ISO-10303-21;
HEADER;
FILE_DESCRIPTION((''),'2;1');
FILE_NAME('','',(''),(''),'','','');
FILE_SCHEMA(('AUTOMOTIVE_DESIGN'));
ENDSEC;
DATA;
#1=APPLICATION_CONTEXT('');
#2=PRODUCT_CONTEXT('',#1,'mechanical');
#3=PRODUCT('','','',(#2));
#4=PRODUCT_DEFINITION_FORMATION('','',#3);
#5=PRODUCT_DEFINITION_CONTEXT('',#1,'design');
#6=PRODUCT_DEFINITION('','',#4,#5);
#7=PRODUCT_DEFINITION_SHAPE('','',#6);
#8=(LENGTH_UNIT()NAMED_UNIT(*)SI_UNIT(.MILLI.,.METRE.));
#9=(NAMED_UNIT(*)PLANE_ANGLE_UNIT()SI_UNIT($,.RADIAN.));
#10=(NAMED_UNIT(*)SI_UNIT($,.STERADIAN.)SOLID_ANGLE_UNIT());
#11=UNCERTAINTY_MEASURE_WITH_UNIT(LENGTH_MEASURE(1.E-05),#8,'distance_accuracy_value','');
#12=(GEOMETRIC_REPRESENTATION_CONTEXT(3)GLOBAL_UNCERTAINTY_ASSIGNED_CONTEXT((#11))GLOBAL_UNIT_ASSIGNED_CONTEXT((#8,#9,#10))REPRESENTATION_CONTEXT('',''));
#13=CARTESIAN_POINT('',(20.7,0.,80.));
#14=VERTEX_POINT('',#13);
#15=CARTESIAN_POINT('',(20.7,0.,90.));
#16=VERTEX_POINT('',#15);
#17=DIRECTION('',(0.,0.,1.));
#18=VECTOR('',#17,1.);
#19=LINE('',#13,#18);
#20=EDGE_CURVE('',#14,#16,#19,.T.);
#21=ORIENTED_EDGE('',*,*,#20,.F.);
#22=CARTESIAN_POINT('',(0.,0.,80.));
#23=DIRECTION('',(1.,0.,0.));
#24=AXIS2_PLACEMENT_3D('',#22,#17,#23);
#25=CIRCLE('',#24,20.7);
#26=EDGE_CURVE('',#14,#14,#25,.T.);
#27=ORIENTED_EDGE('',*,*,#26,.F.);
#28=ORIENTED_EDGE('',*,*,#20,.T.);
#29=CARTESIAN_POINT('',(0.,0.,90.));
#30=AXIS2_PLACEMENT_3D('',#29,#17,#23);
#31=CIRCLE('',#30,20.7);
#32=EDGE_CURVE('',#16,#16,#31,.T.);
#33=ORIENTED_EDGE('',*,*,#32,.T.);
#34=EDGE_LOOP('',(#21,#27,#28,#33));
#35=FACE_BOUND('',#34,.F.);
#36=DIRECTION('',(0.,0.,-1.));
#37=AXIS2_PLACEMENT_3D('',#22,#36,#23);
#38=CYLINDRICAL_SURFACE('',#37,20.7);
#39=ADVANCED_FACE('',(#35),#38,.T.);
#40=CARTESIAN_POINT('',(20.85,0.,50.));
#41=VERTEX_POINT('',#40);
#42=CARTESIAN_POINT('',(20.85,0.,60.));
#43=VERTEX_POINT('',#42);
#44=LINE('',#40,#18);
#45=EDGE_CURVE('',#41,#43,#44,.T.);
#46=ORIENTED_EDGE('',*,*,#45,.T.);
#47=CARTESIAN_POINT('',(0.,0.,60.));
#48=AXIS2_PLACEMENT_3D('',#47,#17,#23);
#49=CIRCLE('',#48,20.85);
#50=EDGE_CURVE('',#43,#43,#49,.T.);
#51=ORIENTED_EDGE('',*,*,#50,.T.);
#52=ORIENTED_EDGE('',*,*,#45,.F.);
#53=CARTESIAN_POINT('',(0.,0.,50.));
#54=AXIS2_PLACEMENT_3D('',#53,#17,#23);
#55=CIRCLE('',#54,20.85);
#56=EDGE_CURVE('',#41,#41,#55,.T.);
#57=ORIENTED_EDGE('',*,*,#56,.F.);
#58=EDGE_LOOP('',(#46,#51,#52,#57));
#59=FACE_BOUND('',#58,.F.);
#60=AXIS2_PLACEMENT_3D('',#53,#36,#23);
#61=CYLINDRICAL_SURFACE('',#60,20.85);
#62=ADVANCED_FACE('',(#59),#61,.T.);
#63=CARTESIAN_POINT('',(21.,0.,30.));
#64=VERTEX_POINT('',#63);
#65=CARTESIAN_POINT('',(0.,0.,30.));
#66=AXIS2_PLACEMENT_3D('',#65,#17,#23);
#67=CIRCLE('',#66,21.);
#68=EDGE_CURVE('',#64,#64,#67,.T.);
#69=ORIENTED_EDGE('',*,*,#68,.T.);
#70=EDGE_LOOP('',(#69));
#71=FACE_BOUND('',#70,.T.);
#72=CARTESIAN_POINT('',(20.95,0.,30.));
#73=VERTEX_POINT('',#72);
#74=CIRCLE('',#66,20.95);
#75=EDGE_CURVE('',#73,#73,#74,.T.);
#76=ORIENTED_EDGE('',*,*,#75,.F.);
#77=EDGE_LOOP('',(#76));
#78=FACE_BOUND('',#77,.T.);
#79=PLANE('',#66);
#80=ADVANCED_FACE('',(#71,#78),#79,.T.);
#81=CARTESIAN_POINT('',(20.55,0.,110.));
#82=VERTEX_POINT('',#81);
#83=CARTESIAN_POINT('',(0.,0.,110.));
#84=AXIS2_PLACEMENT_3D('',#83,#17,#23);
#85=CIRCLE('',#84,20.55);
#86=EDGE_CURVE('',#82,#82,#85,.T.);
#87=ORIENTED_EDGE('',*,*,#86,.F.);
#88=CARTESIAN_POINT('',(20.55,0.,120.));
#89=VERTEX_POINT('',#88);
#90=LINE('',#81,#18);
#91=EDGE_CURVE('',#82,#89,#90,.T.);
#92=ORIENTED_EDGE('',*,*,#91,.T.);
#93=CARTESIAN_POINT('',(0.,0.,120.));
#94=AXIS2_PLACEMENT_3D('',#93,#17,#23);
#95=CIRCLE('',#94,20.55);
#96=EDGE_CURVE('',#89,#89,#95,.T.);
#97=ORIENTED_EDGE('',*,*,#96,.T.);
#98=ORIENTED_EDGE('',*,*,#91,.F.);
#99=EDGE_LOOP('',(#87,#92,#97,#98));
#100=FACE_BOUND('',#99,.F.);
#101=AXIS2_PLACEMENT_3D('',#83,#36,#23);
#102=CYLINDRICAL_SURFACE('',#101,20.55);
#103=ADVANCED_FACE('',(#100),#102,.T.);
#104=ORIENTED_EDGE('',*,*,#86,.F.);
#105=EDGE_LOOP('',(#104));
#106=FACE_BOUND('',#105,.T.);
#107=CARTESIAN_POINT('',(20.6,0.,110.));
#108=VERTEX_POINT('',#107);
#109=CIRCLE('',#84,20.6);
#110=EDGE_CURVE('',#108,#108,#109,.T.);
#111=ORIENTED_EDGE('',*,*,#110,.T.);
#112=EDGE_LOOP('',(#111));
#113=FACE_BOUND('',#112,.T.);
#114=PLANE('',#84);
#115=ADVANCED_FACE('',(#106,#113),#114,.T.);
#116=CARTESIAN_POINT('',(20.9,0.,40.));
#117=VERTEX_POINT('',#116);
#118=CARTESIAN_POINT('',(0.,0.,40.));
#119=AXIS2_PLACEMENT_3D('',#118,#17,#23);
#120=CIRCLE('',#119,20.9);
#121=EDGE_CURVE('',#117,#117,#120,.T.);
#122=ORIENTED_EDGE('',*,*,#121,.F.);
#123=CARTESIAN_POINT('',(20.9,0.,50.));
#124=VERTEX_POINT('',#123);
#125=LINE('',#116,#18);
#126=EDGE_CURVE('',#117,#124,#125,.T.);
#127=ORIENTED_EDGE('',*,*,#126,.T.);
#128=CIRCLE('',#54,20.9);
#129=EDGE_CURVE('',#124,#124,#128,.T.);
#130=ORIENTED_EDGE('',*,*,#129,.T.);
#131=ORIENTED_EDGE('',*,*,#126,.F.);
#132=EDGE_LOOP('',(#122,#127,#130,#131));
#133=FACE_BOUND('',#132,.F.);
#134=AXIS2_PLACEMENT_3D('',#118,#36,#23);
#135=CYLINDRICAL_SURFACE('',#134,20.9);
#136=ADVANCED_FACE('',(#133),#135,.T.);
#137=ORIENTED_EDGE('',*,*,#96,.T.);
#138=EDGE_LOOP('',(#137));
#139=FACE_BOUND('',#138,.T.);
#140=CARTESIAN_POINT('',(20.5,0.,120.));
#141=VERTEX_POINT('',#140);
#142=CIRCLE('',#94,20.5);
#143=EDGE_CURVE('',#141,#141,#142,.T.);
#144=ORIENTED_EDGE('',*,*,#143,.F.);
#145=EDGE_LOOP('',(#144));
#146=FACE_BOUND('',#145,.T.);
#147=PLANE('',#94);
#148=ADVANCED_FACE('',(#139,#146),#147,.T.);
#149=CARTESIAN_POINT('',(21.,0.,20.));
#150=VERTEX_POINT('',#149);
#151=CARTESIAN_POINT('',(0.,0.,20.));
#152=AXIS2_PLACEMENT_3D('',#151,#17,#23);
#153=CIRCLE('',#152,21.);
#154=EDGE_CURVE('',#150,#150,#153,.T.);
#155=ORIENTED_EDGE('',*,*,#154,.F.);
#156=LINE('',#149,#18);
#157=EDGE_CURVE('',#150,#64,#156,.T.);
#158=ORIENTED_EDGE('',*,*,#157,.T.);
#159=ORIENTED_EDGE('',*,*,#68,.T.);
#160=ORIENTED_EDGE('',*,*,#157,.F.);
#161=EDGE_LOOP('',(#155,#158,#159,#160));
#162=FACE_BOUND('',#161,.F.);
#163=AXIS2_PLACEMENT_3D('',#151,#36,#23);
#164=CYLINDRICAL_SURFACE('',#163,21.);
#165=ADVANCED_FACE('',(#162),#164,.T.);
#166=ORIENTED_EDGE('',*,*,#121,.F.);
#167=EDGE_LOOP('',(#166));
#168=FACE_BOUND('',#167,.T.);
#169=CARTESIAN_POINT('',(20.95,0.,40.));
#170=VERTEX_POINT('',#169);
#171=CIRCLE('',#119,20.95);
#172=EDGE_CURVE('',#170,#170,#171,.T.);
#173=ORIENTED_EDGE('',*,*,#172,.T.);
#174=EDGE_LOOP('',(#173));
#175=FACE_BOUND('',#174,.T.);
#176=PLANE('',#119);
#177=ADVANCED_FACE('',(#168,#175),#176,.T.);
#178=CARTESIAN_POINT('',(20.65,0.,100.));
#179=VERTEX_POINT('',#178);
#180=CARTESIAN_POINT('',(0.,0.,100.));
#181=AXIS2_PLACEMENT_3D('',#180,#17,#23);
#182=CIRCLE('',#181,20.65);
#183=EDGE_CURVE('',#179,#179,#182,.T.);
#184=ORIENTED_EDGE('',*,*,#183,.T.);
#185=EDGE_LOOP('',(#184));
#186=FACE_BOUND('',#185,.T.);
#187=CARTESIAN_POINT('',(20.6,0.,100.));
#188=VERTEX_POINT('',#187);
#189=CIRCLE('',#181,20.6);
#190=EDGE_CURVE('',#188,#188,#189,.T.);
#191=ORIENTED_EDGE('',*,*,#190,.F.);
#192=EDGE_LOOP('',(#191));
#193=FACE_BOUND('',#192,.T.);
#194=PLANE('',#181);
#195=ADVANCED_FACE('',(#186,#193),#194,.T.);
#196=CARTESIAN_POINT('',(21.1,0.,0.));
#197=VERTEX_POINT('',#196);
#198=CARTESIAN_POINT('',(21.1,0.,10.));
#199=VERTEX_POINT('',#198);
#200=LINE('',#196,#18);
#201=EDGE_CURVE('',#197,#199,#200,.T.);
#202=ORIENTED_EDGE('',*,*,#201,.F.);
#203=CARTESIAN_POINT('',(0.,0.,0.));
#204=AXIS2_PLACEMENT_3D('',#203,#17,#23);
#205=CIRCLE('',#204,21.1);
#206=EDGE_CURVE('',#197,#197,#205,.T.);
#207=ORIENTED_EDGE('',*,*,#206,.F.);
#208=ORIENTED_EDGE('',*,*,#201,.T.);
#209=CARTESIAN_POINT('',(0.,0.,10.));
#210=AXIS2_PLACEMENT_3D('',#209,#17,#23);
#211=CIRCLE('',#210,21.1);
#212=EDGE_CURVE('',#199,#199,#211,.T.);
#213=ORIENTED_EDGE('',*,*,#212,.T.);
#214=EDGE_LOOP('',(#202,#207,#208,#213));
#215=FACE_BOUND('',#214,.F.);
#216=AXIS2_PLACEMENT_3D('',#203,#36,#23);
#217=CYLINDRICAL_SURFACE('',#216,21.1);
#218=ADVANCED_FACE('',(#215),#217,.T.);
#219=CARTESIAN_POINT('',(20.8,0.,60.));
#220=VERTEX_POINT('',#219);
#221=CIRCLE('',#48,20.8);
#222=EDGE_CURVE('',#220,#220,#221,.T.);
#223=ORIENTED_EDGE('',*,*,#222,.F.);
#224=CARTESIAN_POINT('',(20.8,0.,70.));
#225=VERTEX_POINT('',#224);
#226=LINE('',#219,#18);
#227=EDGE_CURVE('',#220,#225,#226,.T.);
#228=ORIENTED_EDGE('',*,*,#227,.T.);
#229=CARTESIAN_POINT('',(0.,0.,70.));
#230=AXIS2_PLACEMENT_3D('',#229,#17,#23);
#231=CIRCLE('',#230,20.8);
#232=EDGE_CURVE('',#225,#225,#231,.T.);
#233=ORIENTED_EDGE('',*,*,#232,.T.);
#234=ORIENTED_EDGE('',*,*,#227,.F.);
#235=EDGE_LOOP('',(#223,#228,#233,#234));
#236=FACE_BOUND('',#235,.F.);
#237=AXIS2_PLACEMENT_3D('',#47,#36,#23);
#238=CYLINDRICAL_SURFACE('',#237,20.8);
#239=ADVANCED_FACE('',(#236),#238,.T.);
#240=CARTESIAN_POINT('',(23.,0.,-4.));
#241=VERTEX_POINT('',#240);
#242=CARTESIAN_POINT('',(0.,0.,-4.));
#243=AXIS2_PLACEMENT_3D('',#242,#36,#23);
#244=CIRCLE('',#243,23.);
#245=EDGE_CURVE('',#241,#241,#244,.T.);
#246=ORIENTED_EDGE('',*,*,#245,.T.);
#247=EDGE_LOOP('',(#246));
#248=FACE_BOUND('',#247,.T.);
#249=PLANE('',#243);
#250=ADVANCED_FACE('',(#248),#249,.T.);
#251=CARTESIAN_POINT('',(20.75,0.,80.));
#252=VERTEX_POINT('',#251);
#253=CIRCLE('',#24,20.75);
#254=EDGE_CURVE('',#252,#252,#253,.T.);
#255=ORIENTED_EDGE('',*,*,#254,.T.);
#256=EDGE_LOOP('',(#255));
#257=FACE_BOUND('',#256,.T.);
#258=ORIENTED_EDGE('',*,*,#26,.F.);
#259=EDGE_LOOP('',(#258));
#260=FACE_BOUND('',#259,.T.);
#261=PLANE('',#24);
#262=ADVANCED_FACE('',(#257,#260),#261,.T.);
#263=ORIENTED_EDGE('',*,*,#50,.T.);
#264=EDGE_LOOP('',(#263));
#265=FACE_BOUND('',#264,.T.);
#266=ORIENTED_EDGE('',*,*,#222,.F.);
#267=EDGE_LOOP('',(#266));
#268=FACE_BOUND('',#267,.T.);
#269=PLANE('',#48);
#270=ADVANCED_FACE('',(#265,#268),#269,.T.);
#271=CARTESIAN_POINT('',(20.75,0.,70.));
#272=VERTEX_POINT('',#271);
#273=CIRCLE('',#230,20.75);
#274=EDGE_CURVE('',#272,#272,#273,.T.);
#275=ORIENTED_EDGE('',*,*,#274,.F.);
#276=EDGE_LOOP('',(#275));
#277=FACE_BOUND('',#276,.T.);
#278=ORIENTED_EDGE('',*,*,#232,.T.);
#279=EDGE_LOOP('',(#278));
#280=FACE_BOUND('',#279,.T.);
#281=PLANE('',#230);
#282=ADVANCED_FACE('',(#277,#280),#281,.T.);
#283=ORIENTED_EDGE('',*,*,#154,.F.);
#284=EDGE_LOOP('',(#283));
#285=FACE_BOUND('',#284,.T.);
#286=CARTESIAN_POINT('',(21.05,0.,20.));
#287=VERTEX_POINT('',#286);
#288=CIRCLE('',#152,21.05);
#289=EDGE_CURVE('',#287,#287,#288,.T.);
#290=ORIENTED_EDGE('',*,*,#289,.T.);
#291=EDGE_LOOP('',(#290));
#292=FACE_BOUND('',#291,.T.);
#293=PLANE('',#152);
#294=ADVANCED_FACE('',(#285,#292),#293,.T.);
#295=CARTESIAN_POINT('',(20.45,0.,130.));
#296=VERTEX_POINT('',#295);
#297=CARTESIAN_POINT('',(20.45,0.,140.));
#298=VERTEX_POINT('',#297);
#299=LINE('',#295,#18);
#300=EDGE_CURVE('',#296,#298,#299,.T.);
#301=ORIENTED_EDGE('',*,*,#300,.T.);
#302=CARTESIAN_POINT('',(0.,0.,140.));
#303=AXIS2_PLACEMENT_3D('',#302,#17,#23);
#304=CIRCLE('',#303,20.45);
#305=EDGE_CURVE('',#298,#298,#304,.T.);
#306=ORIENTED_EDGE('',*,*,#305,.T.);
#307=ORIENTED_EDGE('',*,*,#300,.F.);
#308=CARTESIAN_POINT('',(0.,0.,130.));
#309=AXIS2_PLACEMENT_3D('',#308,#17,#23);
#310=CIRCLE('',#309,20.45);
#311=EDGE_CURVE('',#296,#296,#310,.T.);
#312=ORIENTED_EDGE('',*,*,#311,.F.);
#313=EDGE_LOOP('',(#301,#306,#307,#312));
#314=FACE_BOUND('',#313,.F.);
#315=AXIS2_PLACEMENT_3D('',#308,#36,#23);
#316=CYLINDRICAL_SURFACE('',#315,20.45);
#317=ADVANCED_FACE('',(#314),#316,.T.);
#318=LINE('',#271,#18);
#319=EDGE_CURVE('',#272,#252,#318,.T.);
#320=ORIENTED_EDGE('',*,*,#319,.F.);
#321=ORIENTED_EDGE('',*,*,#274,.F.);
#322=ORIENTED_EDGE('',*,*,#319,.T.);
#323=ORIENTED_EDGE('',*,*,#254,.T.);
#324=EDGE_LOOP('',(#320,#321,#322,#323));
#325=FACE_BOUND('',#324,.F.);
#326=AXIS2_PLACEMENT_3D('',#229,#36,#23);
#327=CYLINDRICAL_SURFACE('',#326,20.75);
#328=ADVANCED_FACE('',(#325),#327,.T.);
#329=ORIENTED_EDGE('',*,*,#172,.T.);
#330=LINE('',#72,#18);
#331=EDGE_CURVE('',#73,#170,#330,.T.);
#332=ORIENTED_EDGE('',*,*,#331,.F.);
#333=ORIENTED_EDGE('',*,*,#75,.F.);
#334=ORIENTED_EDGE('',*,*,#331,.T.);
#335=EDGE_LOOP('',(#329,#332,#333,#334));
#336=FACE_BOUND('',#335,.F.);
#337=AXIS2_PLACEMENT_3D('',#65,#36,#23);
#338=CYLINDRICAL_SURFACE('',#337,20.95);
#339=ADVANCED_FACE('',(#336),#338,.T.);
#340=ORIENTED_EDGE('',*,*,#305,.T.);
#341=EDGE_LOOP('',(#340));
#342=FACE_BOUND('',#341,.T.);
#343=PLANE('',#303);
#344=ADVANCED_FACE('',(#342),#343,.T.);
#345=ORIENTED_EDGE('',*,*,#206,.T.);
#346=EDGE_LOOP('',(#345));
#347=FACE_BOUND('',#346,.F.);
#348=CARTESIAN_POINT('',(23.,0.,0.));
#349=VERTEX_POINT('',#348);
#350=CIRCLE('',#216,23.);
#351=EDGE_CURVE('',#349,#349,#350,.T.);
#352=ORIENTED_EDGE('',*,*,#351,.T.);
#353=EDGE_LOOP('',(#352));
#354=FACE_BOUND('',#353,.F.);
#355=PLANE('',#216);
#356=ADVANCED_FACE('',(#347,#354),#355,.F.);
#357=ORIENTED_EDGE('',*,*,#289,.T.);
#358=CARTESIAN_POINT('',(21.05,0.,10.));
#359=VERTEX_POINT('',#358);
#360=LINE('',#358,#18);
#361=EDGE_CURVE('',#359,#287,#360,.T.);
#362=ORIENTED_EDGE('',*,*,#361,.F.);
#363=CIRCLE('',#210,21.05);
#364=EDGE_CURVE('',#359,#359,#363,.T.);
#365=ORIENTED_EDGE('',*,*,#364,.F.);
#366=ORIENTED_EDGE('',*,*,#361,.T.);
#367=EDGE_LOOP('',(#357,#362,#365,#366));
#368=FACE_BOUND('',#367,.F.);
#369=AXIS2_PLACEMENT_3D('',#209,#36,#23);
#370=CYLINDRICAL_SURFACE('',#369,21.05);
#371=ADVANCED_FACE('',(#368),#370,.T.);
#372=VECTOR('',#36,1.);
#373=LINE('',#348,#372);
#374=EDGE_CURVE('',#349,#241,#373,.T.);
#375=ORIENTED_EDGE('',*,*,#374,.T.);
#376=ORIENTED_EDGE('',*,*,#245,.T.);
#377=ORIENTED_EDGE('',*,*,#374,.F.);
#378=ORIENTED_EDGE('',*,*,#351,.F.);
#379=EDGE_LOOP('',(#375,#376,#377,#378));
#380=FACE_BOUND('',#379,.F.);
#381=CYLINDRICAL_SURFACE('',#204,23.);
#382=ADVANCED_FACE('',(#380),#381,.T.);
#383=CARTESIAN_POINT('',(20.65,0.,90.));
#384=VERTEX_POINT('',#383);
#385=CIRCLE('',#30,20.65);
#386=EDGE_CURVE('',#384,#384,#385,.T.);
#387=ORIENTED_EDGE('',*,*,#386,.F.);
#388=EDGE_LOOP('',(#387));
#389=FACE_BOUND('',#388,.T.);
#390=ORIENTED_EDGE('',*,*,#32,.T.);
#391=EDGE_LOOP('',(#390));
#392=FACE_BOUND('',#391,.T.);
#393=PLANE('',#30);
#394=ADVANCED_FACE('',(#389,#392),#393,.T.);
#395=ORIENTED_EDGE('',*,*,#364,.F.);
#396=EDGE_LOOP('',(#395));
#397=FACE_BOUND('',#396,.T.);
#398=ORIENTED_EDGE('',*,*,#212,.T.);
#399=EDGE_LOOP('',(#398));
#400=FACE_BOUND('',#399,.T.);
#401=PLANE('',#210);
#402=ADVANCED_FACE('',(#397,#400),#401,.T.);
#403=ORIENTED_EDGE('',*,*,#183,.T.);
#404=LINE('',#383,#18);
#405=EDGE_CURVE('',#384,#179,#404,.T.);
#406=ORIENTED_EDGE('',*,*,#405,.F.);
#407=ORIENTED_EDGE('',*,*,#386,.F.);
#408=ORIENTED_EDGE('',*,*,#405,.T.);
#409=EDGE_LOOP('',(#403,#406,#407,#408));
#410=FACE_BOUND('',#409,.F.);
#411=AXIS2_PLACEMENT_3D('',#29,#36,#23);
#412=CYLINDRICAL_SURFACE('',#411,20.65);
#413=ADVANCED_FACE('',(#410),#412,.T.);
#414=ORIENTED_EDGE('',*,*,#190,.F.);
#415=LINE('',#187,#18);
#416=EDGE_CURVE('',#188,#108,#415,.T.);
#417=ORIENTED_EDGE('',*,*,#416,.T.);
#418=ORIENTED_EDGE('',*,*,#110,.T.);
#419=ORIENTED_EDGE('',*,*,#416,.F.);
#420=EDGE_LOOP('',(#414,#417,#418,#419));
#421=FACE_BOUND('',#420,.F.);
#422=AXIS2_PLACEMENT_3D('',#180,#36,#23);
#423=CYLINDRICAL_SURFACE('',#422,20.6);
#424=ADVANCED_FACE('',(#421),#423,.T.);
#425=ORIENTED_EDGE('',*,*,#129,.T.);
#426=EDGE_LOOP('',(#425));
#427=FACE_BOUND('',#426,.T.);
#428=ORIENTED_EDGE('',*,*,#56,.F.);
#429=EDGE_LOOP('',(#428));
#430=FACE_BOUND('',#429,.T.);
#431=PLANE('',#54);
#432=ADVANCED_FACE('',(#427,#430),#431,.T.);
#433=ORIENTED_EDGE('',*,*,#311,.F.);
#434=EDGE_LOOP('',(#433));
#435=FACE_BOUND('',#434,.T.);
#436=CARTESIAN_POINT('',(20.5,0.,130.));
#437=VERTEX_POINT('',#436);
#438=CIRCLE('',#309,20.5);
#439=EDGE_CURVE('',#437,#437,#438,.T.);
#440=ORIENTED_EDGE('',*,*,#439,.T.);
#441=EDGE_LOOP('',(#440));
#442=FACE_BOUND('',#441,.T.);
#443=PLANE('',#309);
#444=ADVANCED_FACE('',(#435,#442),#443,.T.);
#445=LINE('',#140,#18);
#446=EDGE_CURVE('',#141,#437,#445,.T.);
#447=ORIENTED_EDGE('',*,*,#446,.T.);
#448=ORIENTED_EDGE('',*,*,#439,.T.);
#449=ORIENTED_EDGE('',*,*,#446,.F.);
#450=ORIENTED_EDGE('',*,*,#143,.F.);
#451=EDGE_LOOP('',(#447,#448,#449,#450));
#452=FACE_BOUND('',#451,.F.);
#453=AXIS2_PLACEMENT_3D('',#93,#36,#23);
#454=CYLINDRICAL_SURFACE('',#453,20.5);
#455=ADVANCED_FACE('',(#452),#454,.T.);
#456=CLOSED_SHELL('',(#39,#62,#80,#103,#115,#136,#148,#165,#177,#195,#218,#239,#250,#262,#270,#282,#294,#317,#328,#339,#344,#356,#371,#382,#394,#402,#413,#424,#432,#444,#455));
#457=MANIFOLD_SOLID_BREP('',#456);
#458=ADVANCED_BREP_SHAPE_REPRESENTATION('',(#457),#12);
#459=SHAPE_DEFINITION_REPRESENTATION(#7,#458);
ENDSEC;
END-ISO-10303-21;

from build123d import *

# Parameters (mm, degrees)
F0_R      = 21.1
F1_DEPTH  = 10
F2_R      = 21.05
F3_DEPTH  = 10
F4_R      = 21
F5_DEPTH  = 10
F6_R      = 20.95
F7_DEPTH  = 10
F8_R      = 23
F8_R_2    = 21.1
F9_DEPTH  = 4
F10_R     = 20.9
F11_DEPTH = 10
F12_R     = 20.85
F13_DEPTH = 10
F14_R     = 20.8
F15_DEPTH = 10
F16_R     = 20.75
F17_DEPTH = 10
F18_R     = 20.7
F19_DEPTH = 10
F20_R     = 20.65
F21_DEPTH = 10
F22_R     = 20.6
F23_DEPTH = 10
F24_R     = 20.55
F25_DEPTH = 10
F26_R     = 20.5
F27_DEPTH = 10
F28_R     = 20.45
F29_DEPTH = 10


with BuildPart() as f1:
    # F0 (on Top) → F1 (new body)
    with BuildSketch(Plane.XY):
        Circle(F0_R)
    extrude(amount=F1_DEPTH)

    # F2 (on face) → F3 (join)
    with BuildSketch(Plane.XY.offset(10)):
        Circle(F2_R)
    extrude(amount=F3_DEPTH)

    # F4 (on face) → F5 (join)
    with BuildSketch(Plane.XY.offset(20)):
        Circle(F4_R)
    extrude(amount=F5_DEPTH)

    # F6 (on face) → F7 (join)
    with BuildSketch(Plane.XY.offset(30)):
        Circle(F6_R)
    extrude(amount=F7_DEPTH)

    # F8 (on face) → F9 (join)
    with BuildSketch(Plane(origin=(0, 0, 0), x_dir=(1, 0, 0), z_dir=(0, 0, -1))):
        Circle(F8_R)
        Circle(F8_R_2, mode=Mode.SUBTRACT)
        Circle(F8_R_2)
    extrude(amount=F9_DEPTH)

    # F10 (on face) → F11 (join)
    with BuildSketch(Plane.XY.offset(40)):
        Circle(F10_R)
    extrude(amount=F11_DEPTH)

    # F12 (on face) → F13 (join)
    with BuildSketch(Plane.XY.offset(50)):
        Circle(F12_R)
    extrude(amount=F13_DEPTH)

    # F14 (on face) → F15 (join)
    with BuildSketch(Plane.XY.offset(60)):
        Circle(F14_R)
    extrude(amount=F15_DEPTH)

    # F16 (on face) → F17 (join)
    with BuildSketch(Plane.XY.offset(70)):
        Circle(F16_R)
    extrude(amount=F17_DEPTH)

    # F18 (on face) → F19 (join)
    with BuildSketch(Plane.XY.offset(80)):
        Circle(F18_R)
    extrude(amount=F19_DEPTH)

    # F20 (on face) → F21 (join)
    with BuildSketch(Plane.XY.offset(90)):
        Circle(F20_R)
    extrude(amount=F21_DEPTH)

    # F22 (on face) → F23 (join)
    with BuildSketch(Plane.XY.offset(100)):
        Circle(F22_R)
    extrude(amount=F23_DEPTH)

    # F24 (on face) → F25 (join)
    with BuildSketch(Plane.XY.offset(110)):
        Circle(F24_R)
    extrude(amount=F25_DEPTH)

    # F26 (on face) → F27 (join)
    with BuildSketch(Plane.XY.offset(120)):
        Circle(F26_R)
    extrude(amount=F27_DEPTH)

    # F28 (on face) → F29 (join)
    with BuildSketch(Plane.XY.offset(130)):
        Circle(F28_R)
    extrude(amount=F29_DEPTH)


solid = f1.part
